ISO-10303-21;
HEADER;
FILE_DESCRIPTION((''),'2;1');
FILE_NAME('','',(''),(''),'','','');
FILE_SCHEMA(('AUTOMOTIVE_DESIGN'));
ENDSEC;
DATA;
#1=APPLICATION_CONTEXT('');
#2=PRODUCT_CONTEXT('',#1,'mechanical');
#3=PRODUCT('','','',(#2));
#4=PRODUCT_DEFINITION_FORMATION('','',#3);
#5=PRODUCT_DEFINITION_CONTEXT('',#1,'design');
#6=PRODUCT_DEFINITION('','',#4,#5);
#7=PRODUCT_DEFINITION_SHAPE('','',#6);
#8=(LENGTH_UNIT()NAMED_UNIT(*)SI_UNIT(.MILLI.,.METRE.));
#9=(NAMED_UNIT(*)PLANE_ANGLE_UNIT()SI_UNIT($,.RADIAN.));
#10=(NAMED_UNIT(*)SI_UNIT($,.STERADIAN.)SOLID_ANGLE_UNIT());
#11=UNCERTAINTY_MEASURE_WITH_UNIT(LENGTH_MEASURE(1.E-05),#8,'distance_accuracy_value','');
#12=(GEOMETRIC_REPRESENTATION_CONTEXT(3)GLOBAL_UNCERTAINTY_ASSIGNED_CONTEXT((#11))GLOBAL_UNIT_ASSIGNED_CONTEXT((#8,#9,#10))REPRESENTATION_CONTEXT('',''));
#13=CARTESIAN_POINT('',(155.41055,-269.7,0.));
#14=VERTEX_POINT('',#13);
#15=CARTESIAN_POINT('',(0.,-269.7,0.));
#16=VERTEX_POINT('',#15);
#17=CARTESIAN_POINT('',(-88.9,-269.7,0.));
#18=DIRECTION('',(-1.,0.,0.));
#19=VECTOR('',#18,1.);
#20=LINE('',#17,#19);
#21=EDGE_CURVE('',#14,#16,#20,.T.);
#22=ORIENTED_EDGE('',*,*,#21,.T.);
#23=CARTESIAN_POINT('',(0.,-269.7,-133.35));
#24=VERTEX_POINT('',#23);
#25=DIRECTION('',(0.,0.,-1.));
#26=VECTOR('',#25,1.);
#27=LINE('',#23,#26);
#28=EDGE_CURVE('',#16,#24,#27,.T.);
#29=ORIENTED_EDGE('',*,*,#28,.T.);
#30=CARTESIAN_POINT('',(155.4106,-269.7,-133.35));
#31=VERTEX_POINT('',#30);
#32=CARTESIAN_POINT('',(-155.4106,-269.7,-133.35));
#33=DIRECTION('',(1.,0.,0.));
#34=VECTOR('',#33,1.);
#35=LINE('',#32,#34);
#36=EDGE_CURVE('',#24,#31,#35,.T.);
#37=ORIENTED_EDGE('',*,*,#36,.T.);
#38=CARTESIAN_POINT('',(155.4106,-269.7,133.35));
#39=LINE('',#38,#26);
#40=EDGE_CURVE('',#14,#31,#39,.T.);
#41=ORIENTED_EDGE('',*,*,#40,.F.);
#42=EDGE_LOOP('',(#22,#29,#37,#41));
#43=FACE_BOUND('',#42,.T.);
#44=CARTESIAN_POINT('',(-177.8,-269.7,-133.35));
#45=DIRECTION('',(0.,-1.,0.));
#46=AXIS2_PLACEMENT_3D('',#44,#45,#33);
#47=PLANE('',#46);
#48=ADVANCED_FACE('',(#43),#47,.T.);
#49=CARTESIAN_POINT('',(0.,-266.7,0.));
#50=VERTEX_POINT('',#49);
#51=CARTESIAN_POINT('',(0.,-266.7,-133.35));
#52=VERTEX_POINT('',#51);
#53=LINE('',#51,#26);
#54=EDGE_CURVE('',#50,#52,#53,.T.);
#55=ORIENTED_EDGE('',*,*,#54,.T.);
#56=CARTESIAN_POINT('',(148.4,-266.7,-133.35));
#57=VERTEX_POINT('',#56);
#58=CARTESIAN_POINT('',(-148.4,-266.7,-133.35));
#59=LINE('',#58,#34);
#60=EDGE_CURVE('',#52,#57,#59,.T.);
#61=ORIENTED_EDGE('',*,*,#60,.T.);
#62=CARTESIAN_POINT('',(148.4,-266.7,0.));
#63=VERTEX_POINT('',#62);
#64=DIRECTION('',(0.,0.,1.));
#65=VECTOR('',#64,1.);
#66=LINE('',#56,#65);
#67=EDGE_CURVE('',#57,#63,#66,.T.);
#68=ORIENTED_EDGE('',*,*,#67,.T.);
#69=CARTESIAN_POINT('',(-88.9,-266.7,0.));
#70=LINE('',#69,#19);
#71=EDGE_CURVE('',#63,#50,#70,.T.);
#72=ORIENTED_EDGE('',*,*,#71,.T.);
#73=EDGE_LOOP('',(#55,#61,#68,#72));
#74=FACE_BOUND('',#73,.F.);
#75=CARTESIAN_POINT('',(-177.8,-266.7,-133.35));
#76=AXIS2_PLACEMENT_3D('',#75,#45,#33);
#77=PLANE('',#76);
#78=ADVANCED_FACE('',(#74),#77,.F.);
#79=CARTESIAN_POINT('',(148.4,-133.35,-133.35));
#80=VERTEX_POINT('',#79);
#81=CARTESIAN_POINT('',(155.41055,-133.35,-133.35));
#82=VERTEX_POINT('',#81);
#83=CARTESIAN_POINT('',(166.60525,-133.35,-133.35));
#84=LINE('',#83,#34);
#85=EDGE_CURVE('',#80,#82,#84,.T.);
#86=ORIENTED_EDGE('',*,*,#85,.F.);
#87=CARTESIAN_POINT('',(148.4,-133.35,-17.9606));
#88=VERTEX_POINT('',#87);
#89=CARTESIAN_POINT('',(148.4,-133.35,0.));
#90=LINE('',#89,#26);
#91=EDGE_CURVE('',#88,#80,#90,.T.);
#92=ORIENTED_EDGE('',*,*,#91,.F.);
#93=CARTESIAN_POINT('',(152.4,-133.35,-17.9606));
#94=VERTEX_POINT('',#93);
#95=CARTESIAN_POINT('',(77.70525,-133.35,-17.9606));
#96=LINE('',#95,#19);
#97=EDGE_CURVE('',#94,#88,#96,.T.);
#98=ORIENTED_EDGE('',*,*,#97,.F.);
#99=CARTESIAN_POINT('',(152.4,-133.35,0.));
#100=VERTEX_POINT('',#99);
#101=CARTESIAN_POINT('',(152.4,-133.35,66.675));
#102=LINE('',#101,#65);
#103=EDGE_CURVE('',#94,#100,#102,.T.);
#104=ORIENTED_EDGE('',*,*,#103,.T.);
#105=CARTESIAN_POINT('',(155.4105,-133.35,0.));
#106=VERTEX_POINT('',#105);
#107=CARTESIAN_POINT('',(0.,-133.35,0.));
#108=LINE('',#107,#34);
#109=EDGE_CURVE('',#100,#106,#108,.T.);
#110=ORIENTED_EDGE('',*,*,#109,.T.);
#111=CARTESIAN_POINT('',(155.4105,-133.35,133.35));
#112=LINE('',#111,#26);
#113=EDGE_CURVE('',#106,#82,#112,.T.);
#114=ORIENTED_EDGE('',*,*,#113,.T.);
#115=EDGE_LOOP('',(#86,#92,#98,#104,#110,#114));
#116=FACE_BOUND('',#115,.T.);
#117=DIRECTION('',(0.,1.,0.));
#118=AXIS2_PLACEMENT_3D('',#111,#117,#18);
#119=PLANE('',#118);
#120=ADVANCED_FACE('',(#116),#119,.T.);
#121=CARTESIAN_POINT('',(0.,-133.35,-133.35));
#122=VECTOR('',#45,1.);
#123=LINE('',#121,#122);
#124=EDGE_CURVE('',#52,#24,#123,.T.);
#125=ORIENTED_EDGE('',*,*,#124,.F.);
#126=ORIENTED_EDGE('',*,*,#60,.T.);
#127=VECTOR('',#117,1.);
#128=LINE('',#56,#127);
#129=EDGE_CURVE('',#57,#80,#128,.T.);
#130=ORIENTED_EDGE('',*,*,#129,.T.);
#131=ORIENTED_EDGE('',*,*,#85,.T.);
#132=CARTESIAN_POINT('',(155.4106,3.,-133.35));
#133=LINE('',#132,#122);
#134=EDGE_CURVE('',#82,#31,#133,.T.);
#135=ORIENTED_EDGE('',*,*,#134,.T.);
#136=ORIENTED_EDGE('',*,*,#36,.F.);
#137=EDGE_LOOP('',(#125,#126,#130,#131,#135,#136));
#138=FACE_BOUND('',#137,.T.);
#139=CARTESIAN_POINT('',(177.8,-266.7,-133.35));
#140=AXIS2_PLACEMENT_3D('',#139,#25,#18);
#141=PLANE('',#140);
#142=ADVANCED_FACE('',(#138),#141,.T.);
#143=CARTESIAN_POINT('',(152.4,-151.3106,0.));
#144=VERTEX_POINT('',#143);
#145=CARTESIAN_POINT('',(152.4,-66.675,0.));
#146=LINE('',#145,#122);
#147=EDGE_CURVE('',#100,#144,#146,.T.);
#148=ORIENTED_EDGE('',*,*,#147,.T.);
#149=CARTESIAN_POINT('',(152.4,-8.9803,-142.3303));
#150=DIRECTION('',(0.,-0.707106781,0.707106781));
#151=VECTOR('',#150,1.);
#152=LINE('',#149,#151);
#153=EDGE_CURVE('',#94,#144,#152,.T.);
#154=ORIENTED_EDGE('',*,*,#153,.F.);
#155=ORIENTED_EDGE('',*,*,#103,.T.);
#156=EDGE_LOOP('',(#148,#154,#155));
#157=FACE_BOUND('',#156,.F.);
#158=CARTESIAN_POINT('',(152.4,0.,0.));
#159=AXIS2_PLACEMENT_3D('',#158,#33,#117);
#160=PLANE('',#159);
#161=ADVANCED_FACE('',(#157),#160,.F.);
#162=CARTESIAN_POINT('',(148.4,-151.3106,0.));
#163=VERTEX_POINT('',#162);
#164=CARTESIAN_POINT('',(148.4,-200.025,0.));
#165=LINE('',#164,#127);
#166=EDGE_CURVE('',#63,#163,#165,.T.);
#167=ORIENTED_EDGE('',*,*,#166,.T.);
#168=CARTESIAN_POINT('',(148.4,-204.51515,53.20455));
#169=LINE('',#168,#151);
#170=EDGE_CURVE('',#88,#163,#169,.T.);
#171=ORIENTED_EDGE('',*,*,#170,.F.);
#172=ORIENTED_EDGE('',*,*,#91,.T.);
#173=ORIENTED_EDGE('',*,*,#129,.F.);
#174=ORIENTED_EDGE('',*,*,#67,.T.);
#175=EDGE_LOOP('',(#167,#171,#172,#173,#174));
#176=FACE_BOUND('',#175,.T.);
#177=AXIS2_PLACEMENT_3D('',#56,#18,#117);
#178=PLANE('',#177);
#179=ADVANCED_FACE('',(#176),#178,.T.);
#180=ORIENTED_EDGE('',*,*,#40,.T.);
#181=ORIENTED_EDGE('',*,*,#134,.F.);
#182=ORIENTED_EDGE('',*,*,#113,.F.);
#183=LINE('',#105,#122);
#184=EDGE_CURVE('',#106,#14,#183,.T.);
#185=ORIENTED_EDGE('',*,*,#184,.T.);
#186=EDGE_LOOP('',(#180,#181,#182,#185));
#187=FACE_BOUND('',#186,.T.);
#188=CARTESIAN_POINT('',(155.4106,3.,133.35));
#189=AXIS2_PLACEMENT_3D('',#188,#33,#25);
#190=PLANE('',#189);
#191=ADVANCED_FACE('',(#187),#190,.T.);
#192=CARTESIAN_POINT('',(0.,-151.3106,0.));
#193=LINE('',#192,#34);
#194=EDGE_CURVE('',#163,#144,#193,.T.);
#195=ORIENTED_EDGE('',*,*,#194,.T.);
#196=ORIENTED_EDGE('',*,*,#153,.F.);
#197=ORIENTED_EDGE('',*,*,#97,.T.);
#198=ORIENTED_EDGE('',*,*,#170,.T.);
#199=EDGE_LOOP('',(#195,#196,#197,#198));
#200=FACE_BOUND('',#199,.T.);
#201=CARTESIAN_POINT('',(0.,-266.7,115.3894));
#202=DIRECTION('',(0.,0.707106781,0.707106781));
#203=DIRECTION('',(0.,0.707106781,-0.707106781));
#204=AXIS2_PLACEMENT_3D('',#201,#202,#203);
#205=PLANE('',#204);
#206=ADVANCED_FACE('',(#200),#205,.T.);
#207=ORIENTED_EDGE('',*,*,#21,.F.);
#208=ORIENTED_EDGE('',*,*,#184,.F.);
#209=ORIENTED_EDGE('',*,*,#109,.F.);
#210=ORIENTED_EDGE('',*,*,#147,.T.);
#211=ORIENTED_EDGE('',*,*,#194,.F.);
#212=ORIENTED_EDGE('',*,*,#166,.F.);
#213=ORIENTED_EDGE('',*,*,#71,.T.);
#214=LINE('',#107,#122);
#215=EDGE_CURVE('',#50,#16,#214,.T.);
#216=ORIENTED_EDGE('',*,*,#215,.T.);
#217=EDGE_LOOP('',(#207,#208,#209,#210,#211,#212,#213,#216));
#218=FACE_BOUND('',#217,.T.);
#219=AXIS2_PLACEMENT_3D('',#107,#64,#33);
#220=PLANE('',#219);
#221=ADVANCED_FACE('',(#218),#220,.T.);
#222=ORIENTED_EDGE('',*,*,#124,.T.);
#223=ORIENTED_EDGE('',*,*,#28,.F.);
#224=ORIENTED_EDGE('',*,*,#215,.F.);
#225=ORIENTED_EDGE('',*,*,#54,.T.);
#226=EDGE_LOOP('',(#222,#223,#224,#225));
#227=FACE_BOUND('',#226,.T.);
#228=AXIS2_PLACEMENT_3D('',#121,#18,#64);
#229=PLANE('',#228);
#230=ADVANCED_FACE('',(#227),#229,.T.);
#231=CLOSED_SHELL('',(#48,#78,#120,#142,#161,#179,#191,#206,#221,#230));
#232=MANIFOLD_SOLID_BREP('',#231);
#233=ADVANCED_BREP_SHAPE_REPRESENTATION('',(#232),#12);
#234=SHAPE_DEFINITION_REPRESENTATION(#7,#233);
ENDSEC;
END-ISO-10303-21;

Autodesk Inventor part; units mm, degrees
ref_plane "YZ Plane" through (0, 0, 0) normal (1, 0, 0) x (0, 1, 0)
ref_plane "XZ Plane" through (0, 0, 0) normal (0, 1, 0) x (-1, 0, 0)
ref_plane "XY Plane" through (0, 0, 0) normal (0, 0, 1) x (1, 0, 0)
sketch "Sketch1" plane through (0, 0, 0) normal (0, 1, 0) x (-1, 0, 0)
  line L0 (110, -80) -> (-110, -80)
  line L1 (-110, -80) -> (-110, 80)
  line L2 (-110, 80) -> (110, 80)
  line L3 (110, 80) -> (110, -80)
  line L4 (320.2117, -53.5522) -> (168.036, -53.5522) construction
  line L5 (168.036, -53.5522) -> (168.036, 90.1689) construction
  line L6 (168.036, 90.1689) -> (320.2117, 90.1689) construction
  line L7 (320.2117, 90.1689) -> (320.2117, -53.5522) construction
  line L8 (124.3, -89.75) -> (-124.3, -89.75) construction
  line L9 (-124.3, -89.75) -> (-124.3, 89.75) construction
  line L10 (-124.3, 89.75) -> (124.3, 89.75) construction
  line L11 (124.3, 89.75) -> (124.3, -89.75) construction
  line L12 (124.3, -89.75) -> (-124.3, 89.75) construction
  line L13 (-124.3, -89.75) -> (124.3, 89.75) construction
  line L14 (-152.4, -107.95) -> (152.4, -107.95)
  line L15 (152.4, -107.95) -> (152.4, 107.95)
  line L16 (152.4, 107.95) -> (-152.4, 107.95)
  line L17 (-152.4, 107.95) -> (-152.4, -107.95)
  line L18 (-152.4, -107.95) -> (152.4, 107.95) construction
  line L19 (152.4, -107.95) -> (-152.4, 107.95) construction
  line L20 (177.8, 133.35) -> (177.8, -133.35)
  line L21 (177.8, -133.35) -> (-177.8, -133.35)
  line L22 (-177.8, -133.35) -> (-177.8, 133.35)
  line L23 (-177.8, 133.35) -> (177.8, 133.35)
  point P0 (0, 0)
  dimension "d11" = 220
  dimension "d12" = 160
  dimension "d15" = 248.6
  dimension "d16" = 179.5
  dimension "d18" = 304.8
  dimension "d19" = 215.9
  dimension "d22" = 25.4
extrude "Top" add sketch "Sketch1" along normal blind 25.4 contours L17 L16 L15 L14 | L20 L21 L22 L23
sketch "Sketch3" plane through (177.8, 0, 133.35) normal (1, 0, 0) x (0, 0, -1)
  line L0 (0, 0) -> (0, 25.4) projected
  line L1 (266.7, 0) -> (266.7, 25.4) projected
  line L2 (0, 0) -> (266.7, 0)
  line L3 (266.7, 0) -> (266.7, -266.7)
  line L4 (266.7, -266.7) -> (0, -266.7)
  line L5 (0, -266.7) -> (0, 0)
  point P0 (133.35, 0)
  dimension "d25" = 266.7
extrude "Right" add sketch "Sketch3" against normal blind 50.8
sketch "Sketch4" plane through (-177.8, 0, -133.35) normal (-1, 0, 0) x (0, 0, 1)
  line L0 (0, 0) -> (0, 25.4) projected
  line L1 (266.7, -266.7) -> (266.7, 0) projected
  line L2 (0, 0) -> (266.7, 0)
  line L3 (266.7, 0) -> (266.7, -266.7)
  line L4 (266.7, -266.7) -> (0, -266.7)
  line L5 (0, -266.7) -> (0, 0)
  point P0 (133.35, 0)
  dimension "d28" = 266.7
extrude "Left" add sketch "Sketch4" against normal blind 50.8
sketch "Sketch5" plane through (0, 0, 0) normal (1, 0, 0) x (0, 1, 0)
  line L0 (-266.7, -133.35) -> (25.4, -133.35) projected
  line L1 (-266.7, 133.35) -> (-266.7, -133.35) projected
  line L2 (0, -133.35) -> (-266.7, 133.35)
  line L3 (-266.7, 133.35) -> (-275.6803, 124.3697)
  line L4 (-275.6803, 124.3697) -> (-8.9803, -142.3303)
  line L5 (-8.9803, -142.3303) -> (0, -133.35)
  point P0 (0, 0)
  dimension "d31" = 12.7
extrude "Plexiglass Cut" cut sketch "Sketch5" along normal mid plane 304.8 contours L4 L1 L2 L0 | L0 L5 L4 | L4 L3 L1
sketch "Sketch6" plane through (-177.8, -266.7, -133.35) normal (0, -1, 0) x (1, 0, 0)
  line L0 (0, 0) -> (0, 266.7) projected
  line L1 (355.6, 0) -> (0, 0) projected
  line L2 (0, 266.7) -> (355.6, 266.7)
  line L3 (355.6, 266.7) -> (355.6, 0)
  line L4 (355.6, 0) -> (0, 0)
  line L5 (0, 0) -> (0, 266.7)
  point P0 (177.8, 133.35)
extrude "Bottom" add sketch "Sketch6" along normal blind 25.4
sketch "Sketch9" plane through (0, 25.4, 0) normal (0, 1, 0) x (1, 0, 0)
  line L0 (177.8, -133.35) -> (127, -133.35) projected
  line L1 (177.8, 133.35) -> (-177.8, 133.35) projected
  line L2 (177.8, -133.35) -> (-177.8, -133.35)
  line L3 (-177.8, -133.35) -> (-177.8, 133.35)
  line L4 (-177.8, 133.35) -> (177.8, 133.35)
  line L5 (177.8, 133.35) -> (177.8, -133.35)
  point P0 (0, 0)
extrude "Top Flattening" cut sketch "Sketch9" against normal blind 22.4
sketch "Sketch10" plane through (0, 3, 0) normal (0, 1, 0) x (1, 0, 0)
  line L0 (-177.8, -133.35) -> (-177.8, 133.35) projected
  line L1 (-155.4106, 133.35) -> (-177.8, 133.35)
  line L2 (-177.8, 133.35) -> (-177.8, -133.35)
  line L3 (-177.8, -133.35) -> (-155.4106, -133.35)
  line L4 (-155.4106, -133.35) -> (-155.4106, 133.35)
  line L5 (177.8, 133.35) -> (177.8, -133.35)
  line L6 (177.8, -133.35) -> (155.4106, -133.35)
  line L7 (155.4106, -133.35) -> (155.4106, 133.35)
  line L8 (155.4106, 133.35) -> (177.8, 133.35)
  line L9 (152.4, -115.3895) -> (152.4, 133.35) projected
  point P0 (0, 0)
  point P1 (-177.8, 0)
  dimension "d48" = 22.3894
  dimension "d49" = 22.3894
extrude "Outer Side Flattening" cut sketch "Sketch10" against normal through all
sketch "Sketch11" plane through (-177.8, -292.1, -133.35) normal (0, -1, 0) x (1, 0, 0)
  line L0 (22.3894, 0) -> (333.2106, 0) projected
  line L1 (333.2106, 0) -> (22.3894, 0)
  line L2 (22.3894, 0) -> (22.3894, 266.7)
  line L3 (22.3894, 266.7) -> (333.2106, 266.7)
  line L4 (333.2106, 266.7) -> (333.2106, 0)
  point P0 (177.8, 133.35)
extrude "Bottom Flattening" cut sketch "Sketch11" against normal blind 22.4
sketch "Sketch12" plane through (155.4106, 3, -133.35) normal (0, 0, -1) x (-1, 0, 0)
  line L0 (155.4106, -3) -> (155.4106, -269.7) construction
  line L1 (7.0106, -269.7) -> (7.0106, -3)
  line L2 (7.0106, -3) -> (303.8106, -3)
  line L3 (303.8106, -3) -> (303.8106, -269.7)
  line L4 (303.8106, -269.7) -> (7.0106, -269.7)
  line L5 (7.0106, -269.7) -> (303.8106, -3) construction
  line L6 (7.0106, -3) -> (303.8106, -269.7) construction
  point P0 (155.4106, -136.35)
  point P1 (155.4106, -3)
  dimension "d54" = 296.8
extrude "Inner Flattening" cut sketch "Sketch12" against normal through all
sketch "Sketch13" plane through (-155.4106, 3, 133.35) normal (0, 0, 1) x (1, 0, 0)
  line L0 (310.8211, -272.7) -> (310.8211, 0) projected
  line L1 (0, -272.7) -> (0, 0) projected
  line L2 (310.8211, -136.35) -> (0, -136.35)
  line L3 (0, -136.35) -> (0, 0)
  line L4 (0, 0) -> (310.8211, 0)
  line L5 (310.8211, 0) -> (310.8211, -136.35)
  point P0 (155.4106, -3)
  point P1 (310.8211, 0)
  point P2 (0, -136.35)
extrude "Top Cut" cut sketch "Sketch13" against normal through all
sketch "Sketch14" plane through (-155.4106, -133.35, 133.35) normal (0, 1, 0) x (1, 0, 0)
  line L0 (310.8211, 266.7) -> (0, 266.7) projected
  line L1 (155.4106, 133.35) -> (310.8211, 133.35)
  line L2 (310.8211, 133.35) -> (310.8211, 266.7)
  line L3 (310.8211, 266.7) -> (155.4106, 266.7)
  line L4 (155.4106, 266.7) -> (155.4106, 133.35)
  line L5 (0, 0) -> (310.8212, 0) projected
  line L6 (310.8211, 266.7) -> (0, 266.7)
  line L7 (0, 266.7) -> (0, 0)
  line L8 (0, 0) -> (310.8211, 0)
  line L9 (310.8211, 0) -> (310.8211, 266.7)
extrude "Quarter Cut" cut sketch "Sketch14" against normal through all contours L4 L1 L9 L5 L7 L0
properties part number "Apple iPad 2022 Hologram"
